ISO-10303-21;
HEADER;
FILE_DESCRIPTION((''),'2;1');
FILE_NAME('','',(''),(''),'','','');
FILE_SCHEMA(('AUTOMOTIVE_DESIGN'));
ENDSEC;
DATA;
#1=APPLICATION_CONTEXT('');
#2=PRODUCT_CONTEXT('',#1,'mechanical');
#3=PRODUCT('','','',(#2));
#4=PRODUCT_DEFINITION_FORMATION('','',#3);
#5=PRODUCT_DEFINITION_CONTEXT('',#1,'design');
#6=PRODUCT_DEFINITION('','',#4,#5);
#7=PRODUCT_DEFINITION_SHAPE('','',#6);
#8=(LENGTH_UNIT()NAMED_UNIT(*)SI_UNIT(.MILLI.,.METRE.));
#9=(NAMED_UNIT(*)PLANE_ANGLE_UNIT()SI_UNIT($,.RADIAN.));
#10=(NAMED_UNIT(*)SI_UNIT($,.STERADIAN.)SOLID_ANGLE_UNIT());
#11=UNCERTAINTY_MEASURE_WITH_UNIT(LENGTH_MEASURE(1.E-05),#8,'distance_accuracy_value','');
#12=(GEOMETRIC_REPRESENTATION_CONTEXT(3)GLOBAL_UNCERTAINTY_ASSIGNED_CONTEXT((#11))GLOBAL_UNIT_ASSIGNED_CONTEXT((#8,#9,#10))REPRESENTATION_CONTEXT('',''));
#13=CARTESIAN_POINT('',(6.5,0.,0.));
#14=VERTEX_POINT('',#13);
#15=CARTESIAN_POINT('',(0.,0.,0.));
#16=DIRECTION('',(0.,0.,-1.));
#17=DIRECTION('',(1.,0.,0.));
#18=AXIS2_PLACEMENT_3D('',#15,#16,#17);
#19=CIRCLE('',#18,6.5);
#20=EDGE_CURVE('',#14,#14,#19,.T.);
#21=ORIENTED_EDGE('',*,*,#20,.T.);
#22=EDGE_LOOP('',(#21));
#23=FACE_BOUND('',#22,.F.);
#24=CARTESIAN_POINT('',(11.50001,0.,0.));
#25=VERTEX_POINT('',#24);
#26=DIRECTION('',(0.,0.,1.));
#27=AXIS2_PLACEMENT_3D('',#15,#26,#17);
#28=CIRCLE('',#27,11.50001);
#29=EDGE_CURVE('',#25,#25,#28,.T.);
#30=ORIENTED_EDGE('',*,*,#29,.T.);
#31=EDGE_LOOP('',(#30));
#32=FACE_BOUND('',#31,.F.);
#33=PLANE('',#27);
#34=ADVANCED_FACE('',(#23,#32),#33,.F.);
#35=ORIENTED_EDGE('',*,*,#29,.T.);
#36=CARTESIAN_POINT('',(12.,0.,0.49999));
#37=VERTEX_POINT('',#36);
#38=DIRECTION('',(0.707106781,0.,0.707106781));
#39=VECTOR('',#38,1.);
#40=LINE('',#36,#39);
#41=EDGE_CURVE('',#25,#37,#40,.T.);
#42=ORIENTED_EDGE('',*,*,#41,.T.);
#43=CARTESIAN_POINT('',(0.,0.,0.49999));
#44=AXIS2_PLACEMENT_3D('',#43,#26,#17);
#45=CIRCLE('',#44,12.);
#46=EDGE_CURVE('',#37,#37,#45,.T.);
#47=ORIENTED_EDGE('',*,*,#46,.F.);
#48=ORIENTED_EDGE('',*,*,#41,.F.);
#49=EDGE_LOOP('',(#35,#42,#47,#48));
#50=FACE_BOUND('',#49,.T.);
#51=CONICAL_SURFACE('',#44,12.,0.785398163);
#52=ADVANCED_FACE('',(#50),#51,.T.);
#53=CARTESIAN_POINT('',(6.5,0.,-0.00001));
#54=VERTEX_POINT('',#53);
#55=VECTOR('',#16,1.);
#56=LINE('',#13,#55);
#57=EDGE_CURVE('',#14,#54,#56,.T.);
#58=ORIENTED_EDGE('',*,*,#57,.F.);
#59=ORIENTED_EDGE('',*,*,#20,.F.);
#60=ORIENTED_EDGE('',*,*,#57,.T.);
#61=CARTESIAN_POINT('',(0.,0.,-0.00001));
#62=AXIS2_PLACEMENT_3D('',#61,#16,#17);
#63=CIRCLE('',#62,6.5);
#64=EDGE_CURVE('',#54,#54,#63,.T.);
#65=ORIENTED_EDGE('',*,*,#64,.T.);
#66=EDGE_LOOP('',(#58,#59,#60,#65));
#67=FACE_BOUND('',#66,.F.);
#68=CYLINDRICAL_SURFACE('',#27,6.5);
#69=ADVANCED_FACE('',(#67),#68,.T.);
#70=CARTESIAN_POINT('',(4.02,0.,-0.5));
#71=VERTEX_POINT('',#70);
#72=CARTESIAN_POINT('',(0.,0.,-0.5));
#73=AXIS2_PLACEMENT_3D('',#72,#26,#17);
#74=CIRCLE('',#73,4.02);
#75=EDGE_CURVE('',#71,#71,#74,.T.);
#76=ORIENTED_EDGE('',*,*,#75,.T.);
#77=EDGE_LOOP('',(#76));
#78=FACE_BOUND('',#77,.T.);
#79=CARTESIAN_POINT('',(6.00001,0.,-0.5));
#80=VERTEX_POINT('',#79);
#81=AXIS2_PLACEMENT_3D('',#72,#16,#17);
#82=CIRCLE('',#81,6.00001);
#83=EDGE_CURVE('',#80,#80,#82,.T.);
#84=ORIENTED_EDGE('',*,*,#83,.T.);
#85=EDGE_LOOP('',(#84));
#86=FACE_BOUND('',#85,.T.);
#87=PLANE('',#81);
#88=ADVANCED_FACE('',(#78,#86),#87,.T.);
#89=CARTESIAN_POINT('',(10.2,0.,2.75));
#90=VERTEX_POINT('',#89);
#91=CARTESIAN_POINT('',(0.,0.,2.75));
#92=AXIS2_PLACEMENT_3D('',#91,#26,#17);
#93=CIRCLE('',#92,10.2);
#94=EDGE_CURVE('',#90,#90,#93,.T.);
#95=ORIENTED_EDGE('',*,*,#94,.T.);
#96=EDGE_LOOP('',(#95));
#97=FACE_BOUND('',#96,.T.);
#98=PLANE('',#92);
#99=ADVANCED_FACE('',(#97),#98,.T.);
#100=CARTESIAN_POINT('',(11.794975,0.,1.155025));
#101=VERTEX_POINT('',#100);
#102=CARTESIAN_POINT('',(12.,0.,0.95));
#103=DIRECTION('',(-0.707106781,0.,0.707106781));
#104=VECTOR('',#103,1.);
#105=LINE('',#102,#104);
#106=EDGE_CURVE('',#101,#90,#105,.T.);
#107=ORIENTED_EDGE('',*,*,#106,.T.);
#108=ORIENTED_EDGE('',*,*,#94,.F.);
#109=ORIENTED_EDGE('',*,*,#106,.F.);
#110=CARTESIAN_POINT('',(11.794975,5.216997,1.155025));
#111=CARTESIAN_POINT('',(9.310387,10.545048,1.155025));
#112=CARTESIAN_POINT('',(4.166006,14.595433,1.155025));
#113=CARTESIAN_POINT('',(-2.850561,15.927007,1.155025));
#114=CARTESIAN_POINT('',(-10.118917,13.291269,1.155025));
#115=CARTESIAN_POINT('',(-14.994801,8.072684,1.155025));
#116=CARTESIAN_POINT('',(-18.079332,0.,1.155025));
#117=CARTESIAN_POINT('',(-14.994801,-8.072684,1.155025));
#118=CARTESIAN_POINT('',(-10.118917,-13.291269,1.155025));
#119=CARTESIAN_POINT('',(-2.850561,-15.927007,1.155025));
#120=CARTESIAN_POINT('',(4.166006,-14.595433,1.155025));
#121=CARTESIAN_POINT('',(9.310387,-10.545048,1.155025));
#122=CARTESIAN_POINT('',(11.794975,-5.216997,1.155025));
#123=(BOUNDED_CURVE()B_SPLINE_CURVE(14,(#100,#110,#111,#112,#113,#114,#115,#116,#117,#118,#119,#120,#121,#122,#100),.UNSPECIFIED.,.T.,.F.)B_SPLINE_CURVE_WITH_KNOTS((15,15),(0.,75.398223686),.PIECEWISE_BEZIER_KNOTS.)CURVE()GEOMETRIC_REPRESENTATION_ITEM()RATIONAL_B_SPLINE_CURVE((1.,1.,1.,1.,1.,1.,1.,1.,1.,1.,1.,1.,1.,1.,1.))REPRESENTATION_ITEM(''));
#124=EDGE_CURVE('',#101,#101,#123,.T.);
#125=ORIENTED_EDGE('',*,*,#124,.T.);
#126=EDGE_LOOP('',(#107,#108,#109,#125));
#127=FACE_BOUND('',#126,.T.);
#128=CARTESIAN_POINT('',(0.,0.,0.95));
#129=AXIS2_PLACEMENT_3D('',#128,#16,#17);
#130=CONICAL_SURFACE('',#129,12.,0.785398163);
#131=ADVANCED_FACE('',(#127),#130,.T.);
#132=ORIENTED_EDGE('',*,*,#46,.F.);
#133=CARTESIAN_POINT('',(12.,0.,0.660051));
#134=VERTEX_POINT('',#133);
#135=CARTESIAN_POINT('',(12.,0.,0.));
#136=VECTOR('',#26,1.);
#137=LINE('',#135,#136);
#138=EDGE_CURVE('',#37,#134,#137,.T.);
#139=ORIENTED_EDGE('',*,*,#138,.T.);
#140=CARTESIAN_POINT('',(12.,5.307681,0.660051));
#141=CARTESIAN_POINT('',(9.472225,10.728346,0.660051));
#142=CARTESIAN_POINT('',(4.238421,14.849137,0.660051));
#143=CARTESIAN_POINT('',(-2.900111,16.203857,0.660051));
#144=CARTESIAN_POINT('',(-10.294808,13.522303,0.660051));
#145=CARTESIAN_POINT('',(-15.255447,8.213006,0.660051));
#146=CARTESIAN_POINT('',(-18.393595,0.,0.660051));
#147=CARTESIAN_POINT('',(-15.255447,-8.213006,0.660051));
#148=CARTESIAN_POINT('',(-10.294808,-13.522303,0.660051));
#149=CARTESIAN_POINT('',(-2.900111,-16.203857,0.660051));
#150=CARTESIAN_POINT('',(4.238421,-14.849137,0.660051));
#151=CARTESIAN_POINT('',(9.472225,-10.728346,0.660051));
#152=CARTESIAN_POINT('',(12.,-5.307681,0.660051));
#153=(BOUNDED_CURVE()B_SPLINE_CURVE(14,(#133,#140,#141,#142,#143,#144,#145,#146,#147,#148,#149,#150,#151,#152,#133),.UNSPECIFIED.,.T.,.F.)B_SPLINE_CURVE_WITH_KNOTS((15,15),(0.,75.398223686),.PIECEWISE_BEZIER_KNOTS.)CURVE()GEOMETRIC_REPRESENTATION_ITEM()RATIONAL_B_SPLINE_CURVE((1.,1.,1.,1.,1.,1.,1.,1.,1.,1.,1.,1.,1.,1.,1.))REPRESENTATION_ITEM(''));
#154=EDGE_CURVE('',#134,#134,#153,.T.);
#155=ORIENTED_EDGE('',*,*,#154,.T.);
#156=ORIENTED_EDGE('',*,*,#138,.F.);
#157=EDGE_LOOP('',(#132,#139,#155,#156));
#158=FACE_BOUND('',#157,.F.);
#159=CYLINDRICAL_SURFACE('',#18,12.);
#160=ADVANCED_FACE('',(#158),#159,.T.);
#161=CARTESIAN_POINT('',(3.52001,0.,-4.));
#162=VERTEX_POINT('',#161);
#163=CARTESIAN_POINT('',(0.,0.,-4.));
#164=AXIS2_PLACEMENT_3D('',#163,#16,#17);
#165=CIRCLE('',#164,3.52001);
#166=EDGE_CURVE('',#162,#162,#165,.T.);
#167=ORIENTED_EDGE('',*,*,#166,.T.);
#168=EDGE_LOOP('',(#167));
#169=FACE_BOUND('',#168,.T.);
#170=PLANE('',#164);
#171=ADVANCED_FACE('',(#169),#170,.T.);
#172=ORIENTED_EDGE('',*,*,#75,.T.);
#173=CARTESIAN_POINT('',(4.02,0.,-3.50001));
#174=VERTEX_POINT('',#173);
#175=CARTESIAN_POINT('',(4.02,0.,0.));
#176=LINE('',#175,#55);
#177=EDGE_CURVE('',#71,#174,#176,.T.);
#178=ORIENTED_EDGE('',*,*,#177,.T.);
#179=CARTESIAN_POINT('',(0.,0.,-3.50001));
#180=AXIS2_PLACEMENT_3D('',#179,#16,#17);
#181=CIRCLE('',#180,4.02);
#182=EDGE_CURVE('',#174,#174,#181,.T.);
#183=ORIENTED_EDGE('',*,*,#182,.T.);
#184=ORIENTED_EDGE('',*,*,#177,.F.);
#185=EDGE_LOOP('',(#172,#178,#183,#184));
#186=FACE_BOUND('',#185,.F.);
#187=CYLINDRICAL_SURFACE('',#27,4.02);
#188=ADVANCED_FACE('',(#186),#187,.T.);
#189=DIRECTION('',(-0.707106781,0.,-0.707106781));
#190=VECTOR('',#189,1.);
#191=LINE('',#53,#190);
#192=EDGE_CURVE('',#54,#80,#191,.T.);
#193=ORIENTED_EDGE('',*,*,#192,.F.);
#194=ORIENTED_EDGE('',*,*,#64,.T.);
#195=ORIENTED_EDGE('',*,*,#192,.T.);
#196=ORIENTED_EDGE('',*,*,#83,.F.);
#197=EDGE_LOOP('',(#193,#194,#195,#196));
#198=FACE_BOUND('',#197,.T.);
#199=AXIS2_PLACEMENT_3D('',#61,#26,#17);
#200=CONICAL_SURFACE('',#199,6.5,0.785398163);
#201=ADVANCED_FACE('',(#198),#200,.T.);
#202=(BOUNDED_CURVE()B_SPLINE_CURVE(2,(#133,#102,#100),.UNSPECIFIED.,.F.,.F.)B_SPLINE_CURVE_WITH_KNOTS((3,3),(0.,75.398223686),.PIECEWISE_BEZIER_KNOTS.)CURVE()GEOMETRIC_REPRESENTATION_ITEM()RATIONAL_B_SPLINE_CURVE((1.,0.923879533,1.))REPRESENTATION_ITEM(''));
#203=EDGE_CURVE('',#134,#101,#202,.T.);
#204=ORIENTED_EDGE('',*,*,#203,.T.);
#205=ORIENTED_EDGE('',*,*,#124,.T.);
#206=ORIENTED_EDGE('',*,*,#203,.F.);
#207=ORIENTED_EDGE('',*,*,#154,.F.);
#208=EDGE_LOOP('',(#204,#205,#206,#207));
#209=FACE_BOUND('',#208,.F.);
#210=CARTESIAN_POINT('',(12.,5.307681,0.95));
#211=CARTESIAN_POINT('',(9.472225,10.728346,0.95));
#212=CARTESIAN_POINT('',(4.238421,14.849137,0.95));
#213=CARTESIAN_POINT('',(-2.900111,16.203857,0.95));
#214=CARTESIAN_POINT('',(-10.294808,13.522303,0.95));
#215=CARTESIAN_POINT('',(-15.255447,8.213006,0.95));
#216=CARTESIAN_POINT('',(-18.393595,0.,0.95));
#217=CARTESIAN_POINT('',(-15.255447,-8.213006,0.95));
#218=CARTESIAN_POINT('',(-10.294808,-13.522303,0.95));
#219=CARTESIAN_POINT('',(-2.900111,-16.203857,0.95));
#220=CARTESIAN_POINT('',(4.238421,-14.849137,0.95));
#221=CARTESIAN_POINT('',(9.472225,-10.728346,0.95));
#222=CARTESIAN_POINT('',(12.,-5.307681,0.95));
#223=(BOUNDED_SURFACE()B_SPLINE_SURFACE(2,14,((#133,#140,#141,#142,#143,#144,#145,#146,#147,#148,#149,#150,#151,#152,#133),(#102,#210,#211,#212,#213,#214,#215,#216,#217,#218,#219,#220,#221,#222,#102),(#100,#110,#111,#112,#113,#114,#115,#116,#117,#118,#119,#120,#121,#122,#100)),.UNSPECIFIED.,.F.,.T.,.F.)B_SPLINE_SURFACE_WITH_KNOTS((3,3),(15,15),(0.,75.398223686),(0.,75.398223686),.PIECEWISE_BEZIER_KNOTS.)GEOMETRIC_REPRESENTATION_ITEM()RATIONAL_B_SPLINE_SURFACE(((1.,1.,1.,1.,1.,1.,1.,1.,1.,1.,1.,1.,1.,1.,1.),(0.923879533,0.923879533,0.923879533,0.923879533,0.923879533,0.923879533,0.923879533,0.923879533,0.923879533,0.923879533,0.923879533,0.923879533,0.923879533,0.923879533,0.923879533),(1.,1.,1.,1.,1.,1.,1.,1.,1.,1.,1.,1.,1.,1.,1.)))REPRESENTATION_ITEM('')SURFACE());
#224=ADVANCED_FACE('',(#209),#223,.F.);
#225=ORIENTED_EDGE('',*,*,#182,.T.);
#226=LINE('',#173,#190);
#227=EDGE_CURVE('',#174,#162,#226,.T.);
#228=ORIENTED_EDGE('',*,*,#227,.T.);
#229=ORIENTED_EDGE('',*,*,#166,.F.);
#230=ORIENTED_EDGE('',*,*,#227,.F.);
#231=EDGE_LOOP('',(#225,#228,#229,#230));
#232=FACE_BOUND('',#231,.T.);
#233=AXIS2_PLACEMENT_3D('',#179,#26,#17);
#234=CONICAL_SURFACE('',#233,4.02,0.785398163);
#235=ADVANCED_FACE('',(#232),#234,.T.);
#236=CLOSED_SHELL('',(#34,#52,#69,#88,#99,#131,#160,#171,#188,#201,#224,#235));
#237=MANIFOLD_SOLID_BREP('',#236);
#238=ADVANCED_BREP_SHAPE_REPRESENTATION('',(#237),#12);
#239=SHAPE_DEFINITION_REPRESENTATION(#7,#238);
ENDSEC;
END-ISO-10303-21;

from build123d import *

# Parameters (mm, degrees)
F0_R     = 12
F1_DEPTH = 2.75
F2_R     = 4.02
F3_DEPTH = 4
F4_R     = 6.5
F5_DEPTH = 0.5
F6_SIZE  = 0.49999
F7_SIZE  = 1.8
F8_R     = 0.7


# Not quite as in the source:
# - a fillet or chamfer is up to 0.001 mm smaller than in the source, because OpenCascade refuses the exact size


with BuildPart() as f1:
    # F0 (on Top) → F1 (new body)
    with BuildSketch(Plane.XY):
        Circle(F0_R)
    extrude(amount=F1_DEPTH)

    # F2 (on face) → F3 (join)
    with BuildSketch(Plane(origin=(0, 0, 0), x_dir=(1, 0, 0), z_dir=(0, 0, -1))):
        Circle(F2_R)
    extrude(amount=F3_DEPTH)

    # F4 (on face) → F5 (join)
    with BuildSketch(Plane(origin=(0, 0, 0), x_dir=(1, 0, 0), z_dir=(0, 0, -1))):
        Circle(F4_R)
    extrude(amount=F5_DEPTH)

    # F6 (size 0.5 in the source; OpenCascade refuses exactly that, so slightly less here)
    f6_edges = [f1.edges().sort_by_distance(p)[0] for p in [
        (-6.5, 0, -0.5),
        (-4.02, 0, -4),
        (-12, 0, 0),
    ]]
    chamfer(f6_edges, length=F6_SIZE)

    # F7
    f7_edges = [f1.edges().sort_by_distance(p)[0] for p in [
        (-12, 0, 2.75),
    ]]
    chamfer(f7_edges, length=F7_SIZE)

    # F8
    f8_edges = [f1.edges().sort_by_distance(p)[0] for p in [
        (-12, 0, 0.95),
    ]]
    fillet(f8_edges, radius=F8_R)


solid = f1.part
